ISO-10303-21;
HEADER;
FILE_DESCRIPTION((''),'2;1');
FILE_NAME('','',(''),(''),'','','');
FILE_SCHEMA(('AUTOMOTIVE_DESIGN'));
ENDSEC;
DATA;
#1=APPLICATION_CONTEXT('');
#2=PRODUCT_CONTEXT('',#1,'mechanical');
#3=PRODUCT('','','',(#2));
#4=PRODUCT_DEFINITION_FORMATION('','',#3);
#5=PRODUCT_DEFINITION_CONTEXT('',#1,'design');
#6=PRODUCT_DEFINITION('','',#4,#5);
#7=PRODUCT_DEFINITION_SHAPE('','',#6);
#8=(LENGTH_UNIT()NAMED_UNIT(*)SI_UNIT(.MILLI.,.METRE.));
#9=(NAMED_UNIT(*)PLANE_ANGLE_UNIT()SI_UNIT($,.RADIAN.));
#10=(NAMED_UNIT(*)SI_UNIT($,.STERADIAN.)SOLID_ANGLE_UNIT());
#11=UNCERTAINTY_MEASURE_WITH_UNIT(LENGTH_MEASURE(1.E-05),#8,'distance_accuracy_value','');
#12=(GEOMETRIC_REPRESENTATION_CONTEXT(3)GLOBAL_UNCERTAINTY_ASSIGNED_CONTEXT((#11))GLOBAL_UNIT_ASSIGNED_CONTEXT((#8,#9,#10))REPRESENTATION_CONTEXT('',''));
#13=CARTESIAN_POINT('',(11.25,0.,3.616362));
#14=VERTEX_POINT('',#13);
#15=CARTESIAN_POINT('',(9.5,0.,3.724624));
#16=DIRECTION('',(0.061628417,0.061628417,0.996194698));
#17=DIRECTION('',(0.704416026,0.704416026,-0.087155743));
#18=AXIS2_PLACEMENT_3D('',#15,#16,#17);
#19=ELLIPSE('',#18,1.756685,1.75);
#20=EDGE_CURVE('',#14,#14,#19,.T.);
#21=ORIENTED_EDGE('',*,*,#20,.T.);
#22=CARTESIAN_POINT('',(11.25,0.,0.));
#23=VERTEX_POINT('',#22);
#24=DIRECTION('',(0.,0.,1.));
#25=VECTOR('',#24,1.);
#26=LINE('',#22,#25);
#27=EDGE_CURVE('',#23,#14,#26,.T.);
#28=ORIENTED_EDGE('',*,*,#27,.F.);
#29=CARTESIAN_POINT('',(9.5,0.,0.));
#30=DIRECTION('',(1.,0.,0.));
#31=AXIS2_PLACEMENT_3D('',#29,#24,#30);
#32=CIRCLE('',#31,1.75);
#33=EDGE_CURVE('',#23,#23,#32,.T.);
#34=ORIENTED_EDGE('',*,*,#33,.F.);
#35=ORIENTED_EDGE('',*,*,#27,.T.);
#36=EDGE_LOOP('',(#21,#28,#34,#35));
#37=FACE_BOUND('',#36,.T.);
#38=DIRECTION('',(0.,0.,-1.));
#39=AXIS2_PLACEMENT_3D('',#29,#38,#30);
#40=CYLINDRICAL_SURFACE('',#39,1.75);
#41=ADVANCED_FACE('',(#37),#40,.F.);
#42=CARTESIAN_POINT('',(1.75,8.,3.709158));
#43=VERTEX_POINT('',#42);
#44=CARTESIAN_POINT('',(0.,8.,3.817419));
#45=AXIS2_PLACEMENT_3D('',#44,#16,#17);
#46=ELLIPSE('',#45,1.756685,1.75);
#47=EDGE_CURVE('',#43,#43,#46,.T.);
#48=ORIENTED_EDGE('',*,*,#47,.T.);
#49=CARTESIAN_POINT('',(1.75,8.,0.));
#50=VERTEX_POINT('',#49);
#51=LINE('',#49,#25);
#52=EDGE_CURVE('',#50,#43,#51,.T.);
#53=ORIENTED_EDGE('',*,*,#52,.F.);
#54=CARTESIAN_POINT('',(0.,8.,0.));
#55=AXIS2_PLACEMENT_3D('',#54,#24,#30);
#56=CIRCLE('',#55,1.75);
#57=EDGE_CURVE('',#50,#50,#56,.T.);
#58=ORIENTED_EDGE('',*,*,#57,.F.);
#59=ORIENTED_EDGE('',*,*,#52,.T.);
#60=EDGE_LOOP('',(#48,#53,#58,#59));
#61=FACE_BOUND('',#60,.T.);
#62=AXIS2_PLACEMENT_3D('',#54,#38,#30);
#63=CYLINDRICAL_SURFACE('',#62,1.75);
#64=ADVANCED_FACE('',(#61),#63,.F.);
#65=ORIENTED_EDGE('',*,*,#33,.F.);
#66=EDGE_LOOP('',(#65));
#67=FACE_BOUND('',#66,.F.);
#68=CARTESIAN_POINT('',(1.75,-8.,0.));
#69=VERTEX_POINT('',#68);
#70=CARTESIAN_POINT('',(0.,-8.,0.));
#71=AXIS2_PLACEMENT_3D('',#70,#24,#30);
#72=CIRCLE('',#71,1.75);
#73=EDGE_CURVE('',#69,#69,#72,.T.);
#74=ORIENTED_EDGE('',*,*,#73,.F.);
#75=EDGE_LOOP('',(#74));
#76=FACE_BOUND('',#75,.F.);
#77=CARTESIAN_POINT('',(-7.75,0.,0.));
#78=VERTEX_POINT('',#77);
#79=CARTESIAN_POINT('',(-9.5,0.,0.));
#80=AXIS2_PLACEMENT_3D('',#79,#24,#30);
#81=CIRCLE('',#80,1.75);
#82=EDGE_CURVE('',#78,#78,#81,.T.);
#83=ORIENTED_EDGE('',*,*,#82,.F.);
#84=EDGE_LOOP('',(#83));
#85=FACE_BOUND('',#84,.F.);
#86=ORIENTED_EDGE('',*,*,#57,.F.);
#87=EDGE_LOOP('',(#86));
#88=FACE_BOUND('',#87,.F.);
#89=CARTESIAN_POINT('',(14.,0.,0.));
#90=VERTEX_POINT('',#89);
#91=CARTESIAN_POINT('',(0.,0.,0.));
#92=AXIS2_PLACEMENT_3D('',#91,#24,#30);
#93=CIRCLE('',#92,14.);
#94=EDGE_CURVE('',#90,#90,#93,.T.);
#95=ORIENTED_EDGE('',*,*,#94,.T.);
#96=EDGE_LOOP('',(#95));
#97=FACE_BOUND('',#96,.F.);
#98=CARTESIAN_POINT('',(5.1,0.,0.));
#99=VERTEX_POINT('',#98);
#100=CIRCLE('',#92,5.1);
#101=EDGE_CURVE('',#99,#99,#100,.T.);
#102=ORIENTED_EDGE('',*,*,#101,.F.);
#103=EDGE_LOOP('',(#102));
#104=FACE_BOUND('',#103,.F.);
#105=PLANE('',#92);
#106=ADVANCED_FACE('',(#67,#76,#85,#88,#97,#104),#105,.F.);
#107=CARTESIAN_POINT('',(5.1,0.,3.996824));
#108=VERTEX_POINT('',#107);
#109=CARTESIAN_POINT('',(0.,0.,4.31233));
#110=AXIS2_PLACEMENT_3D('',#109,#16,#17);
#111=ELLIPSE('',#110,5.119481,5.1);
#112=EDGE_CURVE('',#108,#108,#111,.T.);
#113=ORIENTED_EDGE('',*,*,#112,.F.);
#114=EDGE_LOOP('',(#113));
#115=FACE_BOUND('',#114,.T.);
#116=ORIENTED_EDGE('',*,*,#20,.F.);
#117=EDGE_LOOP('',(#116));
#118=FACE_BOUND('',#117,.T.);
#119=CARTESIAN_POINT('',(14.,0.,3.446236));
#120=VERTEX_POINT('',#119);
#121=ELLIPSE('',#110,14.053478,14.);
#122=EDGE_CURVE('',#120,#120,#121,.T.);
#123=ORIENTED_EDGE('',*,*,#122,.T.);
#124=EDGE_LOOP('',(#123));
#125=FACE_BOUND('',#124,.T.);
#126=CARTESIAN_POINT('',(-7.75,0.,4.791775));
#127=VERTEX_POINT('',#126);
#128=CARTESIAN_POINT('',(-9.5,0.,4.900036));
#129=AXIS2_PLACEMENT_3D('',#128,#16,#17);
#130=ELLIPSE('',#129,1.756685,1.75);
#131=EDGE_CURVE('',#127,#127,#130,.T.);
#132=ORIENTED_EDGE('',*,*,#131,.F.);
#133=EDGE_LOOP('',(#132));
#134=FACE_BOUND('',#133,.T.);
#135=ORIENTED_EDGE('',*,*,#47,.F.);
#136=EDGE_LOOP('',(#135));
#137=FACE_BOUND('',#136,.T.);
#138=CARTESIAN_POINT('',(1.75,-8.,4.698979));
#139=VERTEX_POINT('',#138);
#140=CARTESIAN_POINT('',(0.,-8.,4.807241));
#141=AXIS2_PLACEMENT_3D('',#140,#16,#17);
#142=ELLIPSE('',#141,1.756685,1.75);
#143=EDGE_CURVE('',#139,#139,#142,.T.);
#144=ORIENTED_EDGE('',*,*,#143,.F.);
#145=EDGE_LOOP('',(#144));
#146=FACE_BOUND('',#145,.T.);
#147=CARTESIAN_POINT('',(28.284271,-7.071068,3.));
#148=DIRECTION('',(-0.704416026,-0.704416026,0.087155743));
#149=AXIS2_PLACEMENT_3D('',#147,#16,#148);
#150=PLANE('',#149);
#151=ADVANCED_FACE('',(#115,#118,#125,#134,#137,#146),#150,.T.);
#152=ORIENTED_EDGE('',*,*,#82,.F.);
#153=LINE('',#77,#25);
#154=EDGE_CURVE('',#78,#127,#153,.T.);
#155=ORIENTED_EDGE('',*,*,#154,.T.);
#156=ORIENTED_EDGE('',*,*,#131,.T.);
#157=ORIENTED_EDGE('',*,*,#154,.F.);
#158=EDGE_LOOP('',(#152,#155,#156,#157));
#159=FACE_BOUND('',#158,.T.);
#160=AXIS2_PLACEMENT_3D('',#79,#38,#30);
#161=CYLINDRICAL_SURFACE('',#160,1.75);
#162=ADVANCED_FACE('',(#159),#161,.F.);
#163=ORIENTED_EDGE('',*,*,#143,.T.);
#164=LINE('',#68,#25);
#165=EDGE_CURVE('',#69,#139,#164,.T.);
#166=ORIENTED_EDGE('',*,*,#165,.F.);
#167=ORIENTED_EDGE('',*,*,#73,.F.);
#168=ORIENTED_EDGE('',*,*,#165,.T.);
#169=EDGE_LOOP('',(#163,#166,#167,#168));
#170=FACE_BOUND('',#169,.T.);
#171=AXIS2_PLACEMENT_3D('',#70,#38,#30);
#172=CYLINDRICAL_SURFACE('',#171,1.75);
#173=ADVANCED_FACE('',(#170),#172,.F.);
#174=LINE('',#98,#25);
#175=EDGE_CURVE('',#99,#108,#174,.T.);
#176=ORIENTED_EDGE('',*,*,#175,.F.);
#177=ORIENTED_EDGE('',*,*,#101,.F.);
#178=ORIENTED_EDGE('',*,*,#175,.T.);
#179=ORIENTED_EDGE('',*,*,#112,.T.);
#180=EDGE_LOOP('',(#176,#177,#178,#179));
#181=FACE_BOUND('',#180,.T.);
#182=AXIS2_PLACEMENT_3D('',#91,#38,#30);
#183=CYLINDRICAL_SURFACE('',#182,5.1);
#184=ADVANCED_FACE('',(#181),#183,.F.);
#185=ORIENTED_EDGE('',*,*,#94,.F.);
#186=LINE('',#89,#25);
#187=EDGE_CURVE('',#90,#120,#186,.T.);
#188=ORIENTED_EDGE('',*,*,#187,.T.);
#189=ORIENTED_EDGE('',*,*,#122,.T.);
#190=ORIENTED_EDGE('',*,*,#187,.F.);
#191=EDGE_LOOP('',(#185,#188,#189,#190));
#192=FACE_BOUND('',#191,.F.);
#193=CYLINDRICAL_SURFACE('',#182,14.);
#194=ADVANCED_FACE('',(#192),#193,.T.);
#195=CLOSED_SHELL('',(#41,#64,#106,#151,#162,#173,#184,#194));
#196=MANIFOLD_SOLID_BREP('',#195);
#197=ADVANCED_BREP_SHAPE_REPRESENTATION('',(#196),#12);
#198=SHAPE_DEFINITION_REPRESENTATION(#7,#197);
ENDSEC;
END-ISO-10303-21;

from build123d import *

# Parameters (mm, degrees)
F0_R     = 14
F0_R_2   = 1.75
F0_R_3   = 5.1
F1_DEPTH = 10
F5_W     = 30
F5_H     = 3
F6_DEPTH = 40


with BuildPart() as f1:
    # F0 (on Top) → F1 (new body)
    with BuildSketch(Plane.XY):
        Circle(F0_R)
        with Locations((0, -8)):
            Circle(F0_R_2, mode=Mode.SUBTRACT)
        with Locations((-9.5, 0)):
            Circle(F0_R_2, mode=Mode.SUBTRACT)
        Circle(F0_R_3, mode=Mode.SUBTRACT)
        with Locations((9.5, 0)):
            Circle(F0_R_2, mode=Mode.SUBTRACT)
        with Locations((0, 8)):
            Circle(F0_R_2, mode=Mode.SUBTRACT)
    extrude(amount=F1_DEPTH)

    # F5 (on face) → F6 (intersect)
    with BuildSketch(Plane(origin=(17.6776695297, -17.6776695297, 0), x_dir=(0.7071067812, 0.7071067812, 0), z_dir=(0.7071067812, -0.7071067812, 0))):
        Polygon((-15, 5.6246599058), (-15, 0), (15, 0), (15, 3), align=None)
        with Locations((0, -1.5)):
            Rectangle(F5_W, F5_H)
    extrude(amount=-F6_DEPTH, mode=Mode.INTERSECT)


solid = f1.part
